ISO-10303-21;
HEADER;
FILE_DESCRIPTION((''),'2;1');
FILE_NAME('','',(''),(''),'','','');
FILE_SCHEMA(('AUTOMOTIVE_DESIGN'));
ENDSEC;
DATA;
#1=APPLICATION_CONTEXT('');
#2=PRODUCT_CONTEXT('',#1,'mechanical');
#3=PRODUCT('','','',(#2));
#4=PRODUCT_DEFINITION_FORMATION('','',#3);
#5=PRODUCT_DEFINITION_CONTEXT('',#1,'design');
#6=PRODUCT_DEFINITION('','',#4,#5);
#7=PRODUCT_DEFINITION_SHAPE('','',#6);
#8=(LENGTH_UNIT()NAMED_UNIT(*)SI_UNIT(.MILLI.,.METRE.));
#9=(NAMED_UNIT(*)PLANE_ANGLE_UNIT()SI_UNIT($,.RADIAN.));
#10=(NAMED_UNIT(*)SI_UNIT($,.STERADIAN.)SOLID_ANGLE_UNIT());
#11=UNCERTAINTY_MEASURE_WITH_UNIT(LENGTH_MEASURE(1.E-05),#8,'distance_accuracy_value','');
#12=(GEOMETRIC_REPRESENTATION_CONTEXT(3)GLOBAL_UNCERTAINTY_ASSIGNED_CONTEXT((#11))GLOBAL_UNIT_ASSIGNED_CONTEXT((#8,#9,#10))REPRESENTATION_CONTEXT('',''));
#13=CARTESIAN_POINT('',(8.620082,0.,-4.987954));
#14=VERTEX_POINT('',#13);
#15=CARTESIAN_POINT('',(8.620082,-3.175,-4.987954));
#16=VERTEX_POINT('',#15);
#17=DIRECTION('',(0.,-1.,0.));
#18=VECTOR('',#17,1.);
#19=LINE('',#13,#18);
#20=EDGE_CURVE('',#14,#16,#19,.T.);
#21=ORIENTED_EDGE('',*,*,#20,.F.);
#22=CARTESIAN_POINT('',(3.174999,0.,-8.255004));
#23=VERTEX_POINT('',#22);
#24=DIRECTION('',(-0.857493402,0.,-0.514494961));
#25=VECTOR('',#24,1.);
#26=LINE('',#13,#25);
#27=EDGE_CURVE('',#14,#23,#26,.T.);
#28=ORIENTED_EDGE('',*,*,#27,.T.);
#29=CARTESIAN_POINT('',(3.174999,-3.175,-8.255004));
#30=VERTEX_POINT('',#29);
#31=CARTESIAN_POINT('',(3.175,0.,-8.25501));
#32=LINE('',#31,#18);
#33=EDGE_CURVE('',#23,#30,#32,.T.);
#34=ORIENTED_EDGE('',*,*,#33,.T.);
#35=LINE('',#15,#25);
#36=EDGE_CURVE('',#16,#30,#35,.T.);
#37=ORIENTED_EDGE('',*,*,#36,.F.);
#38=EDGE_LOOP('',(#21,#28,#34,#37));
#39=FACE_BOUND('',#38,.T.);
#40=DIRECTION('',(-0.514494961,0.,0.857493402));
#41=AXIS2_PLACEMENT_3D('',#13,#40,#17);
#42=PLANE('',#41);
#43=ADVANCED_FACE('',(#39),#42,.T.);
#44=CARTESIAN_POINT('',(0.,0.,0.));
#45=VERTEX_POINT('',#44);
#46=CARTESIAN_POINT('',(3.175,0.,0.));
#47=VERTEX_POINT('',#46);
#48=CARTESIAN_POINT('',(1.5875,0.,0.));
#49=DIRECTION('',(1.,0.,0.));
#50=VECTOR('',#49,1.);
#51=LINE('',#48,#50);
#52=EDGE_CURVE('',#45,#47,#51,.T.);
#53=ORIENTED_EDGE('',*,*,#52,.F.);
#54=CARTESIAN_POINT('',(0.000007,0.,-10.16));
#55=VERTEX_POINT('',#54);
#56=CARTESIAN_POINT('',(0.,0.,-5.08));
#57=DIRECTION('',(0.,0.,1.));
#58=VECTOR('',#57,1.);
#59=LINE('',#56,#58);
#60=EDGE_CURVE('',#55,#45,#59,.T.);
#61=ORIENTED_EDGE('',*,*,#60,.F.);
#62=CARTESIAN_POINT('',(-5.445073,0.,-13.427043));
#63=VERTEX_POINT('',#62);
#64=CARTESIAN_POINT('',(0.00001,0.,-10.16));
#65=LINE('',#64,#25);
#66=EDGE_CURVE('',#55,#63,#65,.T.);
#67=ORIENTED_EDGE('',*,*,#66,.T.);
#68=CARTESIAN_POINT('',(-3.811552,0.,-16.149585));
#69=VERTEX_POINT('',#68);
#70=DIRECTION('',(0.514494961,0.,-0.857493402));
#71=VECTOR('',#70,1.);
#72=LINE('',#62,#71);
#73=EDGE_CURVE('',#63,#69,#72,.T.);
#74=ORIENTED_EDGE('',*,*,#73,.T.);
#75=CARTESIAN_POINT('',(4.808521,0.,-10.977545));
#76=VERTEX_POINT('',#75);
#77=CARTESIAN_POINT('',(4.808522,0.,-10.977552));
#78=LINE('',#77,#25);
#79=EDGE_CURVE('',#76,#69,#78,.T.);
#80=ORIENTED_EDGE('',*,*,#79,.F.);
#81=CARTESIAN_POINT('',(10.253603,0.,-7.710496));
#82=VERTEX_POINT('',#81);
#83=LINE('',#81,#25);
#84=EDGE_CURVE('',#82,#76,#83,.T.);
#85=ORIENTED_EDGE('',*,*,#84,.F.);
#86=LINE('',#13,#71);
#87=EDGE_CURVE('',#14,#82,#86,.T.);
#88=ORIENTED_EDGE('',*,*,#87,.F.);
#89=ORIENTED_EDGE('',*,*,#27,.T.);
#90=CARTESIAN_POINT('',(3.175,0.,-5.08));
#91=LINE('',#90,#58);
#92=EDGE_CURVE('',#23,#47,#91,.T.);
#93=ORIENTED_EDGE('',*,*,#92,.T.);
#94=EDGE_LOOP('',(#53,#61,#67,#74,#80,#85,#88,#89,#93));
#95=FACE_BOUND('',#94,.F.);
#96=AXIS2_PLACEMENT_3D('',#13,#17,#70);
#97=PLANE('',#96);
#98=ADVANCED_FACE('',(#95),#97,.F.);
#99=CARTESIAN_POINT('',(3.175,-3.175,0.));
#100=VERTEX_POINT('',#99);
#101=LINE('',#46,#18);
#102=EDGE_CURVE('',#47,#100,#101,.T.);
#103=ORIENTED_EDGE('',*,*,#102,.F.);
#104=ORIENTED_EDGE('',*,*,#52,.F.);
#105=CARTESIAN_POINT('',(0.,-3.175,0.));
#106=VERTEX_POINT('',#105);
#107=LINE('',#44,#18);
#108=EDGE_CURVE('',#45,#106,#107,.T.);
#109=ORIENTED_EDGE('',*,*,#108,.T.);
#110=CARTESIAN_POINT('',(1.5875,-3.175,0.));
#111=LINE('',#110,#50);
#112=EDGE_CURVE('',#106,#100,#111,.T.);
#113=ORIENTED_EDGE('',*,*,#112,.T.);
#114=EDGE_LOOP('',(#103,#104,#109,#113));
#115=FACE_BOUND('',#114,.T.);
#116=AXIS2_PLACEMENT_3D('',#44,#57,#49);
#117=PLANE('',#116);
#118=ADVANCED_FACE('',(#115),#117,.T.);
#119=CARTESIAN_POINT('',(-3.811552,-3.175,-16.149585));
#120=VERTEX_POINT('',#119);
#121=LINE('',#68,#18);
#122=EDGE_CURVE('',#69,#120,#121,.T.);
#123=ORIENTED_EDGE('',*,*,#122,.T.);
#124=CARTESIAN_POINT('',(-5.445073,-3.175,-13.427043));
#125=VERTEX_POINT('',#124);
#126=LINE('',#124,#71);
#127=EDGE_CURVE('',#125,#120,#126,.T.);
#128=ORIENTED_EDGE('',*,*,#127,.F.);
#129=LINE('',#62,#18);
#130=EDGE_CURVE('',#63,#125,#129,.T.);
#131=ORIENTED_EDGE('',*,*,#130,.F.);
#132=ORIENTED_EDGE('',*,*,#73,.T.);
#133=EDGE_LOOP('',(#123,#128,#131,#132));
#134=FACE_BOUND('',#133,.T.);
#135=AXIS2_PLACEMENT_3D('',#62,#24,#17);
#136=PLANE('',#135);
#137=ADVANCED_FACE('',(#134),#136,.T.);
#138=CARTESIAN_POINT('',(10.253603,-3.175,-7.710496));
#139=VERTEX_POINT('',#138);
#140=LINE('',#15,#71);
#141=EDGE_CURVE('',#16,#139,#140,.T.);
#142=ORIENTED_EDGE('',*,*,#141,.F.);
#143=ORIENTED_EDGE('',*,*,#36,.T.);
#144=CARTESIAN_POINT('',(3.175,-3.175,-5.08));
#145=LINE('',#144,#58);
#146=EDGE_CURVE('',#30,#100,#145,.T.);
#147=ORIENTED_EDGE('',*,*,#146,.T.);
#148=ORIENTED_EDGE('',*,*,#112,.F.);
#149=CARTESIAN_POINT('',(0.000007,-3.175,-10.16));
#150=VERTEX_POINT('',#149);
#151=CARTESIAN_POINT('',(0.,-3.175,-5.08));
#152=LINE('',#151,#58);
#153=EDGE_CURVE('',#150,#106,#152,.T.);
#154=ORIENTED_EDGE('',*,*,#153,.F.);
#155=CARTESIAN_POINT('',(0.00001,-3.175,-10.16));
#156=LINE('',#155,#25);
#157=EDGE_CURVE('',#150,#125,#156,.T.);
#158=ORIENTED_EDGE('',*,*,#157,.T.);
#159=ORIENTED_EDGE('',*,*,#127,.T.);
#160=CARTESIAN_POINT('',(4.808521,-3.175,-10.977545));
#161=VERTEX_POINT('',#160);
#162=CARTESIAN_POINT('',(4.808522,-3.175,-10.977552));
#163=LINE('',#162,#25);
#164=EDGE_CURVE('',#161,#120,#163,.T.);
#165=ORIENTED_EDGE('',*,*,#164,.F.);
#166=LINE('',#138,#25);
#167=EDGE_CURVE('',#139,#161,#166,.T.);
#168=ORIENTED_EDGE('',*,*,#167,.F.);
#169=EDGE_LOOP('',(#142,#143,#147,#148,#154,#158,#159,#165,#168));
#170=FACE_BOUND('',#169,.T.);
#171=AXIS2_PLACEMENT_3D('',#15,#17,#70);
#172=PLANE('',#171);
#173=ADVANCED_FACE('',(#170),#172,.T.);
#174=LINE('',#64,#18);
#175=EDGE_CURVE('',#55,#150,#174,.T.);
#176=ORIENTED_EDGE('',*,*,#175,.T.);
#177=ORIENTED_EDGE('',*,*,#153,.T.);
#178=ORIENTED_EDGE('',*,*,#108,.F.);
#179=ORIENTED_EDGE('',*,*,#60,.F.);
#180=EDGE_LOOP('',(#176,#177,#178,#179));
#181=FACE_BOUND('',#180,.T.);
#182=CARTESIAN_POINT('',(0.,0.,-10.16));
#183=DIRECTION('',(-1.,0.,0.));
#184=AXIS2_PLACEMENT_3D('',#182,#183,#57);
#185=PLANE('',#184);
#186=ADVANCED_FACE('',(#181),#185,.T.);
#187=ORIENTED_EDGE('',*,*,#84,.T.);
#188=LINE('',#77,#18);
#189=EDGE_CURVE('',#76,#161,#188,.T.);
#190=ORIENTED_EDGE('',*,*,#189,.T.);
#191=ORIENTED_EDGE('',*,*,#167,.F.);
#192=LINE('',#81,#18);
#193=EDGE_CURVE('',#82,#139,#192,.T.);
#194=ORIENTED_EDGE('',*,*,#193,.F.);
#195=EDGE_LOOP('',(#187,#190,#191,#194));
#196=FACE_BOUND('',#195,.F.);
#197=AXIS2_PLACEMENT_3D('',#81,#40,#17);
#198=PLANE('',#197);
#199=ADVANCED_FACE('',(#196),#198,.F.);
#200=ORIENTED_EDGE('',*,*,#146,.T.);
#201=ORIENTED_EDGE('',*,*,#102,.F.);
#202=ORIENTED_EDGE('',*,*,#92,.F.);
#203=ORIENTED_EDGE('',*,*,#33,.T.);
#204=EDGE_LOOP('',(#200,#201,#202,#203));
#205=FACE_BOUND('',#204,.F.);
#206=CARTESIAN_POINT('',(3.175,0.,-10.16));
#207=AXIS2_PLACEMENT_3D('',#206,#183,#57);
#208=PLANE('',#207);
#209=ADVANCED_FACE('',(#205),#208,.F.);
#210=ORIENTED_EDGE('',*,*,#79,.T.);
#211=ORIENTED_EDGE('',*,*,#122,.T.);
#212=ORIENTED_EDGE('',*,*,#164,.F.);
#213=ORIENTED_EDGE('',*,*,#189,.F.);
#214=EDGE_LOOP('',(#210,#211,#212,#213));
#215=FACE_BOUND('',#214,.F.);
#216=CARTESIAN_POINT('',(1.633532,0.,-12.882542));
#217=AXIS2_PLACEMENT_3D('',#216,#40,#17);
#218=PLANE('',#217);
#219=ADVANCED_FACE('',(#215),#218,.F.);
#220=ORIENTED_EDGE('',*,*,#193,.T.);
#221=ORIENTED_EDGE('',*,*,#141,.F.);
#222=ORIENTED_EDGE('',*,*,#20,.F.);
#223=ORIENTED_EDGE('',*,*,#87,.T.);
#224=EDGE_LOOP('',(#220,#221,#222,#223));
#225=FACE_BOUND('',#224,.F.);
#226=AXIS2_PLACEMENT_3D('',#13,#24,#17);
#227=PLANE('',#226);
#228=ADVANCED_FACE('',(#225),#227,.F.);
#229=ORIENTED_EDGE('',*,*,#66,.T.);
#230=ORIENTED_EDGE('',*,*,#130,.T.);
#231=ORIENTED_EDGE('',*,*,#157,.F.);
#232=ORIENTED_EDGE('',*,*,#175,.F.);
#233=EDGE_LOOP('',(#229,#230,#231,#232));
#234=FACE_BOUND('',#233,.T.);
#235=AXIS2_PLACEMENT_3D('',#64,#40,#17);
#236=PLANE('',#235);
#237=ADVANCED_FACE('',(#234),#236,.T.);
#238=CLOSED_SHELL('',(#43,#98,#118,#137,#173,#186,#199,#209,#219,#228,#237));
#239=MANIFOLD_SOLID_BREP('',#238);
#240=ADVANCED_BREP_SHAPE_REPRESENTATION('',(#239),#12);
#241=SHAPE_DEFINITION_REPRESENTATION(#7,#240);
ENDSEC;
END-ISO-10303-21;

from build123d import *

# Parameters (mm, degrees)
F0_W            = 3.175
F0_H            = 10.16
F1_DEPTH        = 3.175
F2_SIZE2        = 3.17499
F2_SIZE         = 1.90499
F3_DEPTH        = 3.175
F4_DEPTH        = 6.35
F4_COPIES_COUNT = 2
F4_COPIES_PITCH = 10.052646


# Not quite as in the source:
# - a fillet or chamfer is up to 0.001 mm smaller than in the source, because OpenCascade refuses the exact size
# - a feature of the source that left no trace in its solid (it failed there, or was rolled back) is left out
# - a pattern or mirror of a feature is missing from the dataset's text; its kind, count and spacing are read off the source's solid


with BuildPart() as f1:
    # F0 (on Front) → F1 (new body)
    with BuildSketch(Plane.XZ):
        with Locations((1.5875, -5.08)):
            Rectangle(F0_W, F0_H)
    extrude(amount=F1_DEPTH)

    # F2 (size 1.905 and 3.175 in the source; OpenCascade refuses exactly that, so slightly less here)
    f2_edges = [f1.edges().sort_by_distance(p)[0] for p in [
        (3.175, -1.5875, -10.16),
    ]]
    f2_side = f1.faces().sort_by_distance((3.175, -1.5875, -5.08))[0]
    chamfer(f2_edges, length=F2_SIZE, length2=F2_SIZE2, reference=f2_side)


with BuildPart() as f3:
    # F3 (new): a face of the model
    f3_faces = [f1.part.faces().sort_by_distance(p)[0] for p in [
        (1.587505, -1.5875, -9.207505),
    ]]
    extrude(f3_faces, amount=F3_DEPTH)


with BuildPart() as f1_1:
    add(f1.part)

    # F4 (add): a face of the model
    f4_faces = [f3.part.faces().sort_by_distance(p)[0] for p in [
        (0.8167707507, -1.5875, -11.5212707762),
    ]]

    add(f3.part)  # F4 merges F3
    f4 = extrude(f4_faces, amount=F4_DEPTH)

    # F4_copies: F4 ×2
    with Locations(*[Vector(0.8574928129, 0, 0.5144959434) * (i * F4_COPIES_PITCH) for i in range(1, F4_COPIES_COUNT)]):
        add(f4)


solid = f1_1.part
